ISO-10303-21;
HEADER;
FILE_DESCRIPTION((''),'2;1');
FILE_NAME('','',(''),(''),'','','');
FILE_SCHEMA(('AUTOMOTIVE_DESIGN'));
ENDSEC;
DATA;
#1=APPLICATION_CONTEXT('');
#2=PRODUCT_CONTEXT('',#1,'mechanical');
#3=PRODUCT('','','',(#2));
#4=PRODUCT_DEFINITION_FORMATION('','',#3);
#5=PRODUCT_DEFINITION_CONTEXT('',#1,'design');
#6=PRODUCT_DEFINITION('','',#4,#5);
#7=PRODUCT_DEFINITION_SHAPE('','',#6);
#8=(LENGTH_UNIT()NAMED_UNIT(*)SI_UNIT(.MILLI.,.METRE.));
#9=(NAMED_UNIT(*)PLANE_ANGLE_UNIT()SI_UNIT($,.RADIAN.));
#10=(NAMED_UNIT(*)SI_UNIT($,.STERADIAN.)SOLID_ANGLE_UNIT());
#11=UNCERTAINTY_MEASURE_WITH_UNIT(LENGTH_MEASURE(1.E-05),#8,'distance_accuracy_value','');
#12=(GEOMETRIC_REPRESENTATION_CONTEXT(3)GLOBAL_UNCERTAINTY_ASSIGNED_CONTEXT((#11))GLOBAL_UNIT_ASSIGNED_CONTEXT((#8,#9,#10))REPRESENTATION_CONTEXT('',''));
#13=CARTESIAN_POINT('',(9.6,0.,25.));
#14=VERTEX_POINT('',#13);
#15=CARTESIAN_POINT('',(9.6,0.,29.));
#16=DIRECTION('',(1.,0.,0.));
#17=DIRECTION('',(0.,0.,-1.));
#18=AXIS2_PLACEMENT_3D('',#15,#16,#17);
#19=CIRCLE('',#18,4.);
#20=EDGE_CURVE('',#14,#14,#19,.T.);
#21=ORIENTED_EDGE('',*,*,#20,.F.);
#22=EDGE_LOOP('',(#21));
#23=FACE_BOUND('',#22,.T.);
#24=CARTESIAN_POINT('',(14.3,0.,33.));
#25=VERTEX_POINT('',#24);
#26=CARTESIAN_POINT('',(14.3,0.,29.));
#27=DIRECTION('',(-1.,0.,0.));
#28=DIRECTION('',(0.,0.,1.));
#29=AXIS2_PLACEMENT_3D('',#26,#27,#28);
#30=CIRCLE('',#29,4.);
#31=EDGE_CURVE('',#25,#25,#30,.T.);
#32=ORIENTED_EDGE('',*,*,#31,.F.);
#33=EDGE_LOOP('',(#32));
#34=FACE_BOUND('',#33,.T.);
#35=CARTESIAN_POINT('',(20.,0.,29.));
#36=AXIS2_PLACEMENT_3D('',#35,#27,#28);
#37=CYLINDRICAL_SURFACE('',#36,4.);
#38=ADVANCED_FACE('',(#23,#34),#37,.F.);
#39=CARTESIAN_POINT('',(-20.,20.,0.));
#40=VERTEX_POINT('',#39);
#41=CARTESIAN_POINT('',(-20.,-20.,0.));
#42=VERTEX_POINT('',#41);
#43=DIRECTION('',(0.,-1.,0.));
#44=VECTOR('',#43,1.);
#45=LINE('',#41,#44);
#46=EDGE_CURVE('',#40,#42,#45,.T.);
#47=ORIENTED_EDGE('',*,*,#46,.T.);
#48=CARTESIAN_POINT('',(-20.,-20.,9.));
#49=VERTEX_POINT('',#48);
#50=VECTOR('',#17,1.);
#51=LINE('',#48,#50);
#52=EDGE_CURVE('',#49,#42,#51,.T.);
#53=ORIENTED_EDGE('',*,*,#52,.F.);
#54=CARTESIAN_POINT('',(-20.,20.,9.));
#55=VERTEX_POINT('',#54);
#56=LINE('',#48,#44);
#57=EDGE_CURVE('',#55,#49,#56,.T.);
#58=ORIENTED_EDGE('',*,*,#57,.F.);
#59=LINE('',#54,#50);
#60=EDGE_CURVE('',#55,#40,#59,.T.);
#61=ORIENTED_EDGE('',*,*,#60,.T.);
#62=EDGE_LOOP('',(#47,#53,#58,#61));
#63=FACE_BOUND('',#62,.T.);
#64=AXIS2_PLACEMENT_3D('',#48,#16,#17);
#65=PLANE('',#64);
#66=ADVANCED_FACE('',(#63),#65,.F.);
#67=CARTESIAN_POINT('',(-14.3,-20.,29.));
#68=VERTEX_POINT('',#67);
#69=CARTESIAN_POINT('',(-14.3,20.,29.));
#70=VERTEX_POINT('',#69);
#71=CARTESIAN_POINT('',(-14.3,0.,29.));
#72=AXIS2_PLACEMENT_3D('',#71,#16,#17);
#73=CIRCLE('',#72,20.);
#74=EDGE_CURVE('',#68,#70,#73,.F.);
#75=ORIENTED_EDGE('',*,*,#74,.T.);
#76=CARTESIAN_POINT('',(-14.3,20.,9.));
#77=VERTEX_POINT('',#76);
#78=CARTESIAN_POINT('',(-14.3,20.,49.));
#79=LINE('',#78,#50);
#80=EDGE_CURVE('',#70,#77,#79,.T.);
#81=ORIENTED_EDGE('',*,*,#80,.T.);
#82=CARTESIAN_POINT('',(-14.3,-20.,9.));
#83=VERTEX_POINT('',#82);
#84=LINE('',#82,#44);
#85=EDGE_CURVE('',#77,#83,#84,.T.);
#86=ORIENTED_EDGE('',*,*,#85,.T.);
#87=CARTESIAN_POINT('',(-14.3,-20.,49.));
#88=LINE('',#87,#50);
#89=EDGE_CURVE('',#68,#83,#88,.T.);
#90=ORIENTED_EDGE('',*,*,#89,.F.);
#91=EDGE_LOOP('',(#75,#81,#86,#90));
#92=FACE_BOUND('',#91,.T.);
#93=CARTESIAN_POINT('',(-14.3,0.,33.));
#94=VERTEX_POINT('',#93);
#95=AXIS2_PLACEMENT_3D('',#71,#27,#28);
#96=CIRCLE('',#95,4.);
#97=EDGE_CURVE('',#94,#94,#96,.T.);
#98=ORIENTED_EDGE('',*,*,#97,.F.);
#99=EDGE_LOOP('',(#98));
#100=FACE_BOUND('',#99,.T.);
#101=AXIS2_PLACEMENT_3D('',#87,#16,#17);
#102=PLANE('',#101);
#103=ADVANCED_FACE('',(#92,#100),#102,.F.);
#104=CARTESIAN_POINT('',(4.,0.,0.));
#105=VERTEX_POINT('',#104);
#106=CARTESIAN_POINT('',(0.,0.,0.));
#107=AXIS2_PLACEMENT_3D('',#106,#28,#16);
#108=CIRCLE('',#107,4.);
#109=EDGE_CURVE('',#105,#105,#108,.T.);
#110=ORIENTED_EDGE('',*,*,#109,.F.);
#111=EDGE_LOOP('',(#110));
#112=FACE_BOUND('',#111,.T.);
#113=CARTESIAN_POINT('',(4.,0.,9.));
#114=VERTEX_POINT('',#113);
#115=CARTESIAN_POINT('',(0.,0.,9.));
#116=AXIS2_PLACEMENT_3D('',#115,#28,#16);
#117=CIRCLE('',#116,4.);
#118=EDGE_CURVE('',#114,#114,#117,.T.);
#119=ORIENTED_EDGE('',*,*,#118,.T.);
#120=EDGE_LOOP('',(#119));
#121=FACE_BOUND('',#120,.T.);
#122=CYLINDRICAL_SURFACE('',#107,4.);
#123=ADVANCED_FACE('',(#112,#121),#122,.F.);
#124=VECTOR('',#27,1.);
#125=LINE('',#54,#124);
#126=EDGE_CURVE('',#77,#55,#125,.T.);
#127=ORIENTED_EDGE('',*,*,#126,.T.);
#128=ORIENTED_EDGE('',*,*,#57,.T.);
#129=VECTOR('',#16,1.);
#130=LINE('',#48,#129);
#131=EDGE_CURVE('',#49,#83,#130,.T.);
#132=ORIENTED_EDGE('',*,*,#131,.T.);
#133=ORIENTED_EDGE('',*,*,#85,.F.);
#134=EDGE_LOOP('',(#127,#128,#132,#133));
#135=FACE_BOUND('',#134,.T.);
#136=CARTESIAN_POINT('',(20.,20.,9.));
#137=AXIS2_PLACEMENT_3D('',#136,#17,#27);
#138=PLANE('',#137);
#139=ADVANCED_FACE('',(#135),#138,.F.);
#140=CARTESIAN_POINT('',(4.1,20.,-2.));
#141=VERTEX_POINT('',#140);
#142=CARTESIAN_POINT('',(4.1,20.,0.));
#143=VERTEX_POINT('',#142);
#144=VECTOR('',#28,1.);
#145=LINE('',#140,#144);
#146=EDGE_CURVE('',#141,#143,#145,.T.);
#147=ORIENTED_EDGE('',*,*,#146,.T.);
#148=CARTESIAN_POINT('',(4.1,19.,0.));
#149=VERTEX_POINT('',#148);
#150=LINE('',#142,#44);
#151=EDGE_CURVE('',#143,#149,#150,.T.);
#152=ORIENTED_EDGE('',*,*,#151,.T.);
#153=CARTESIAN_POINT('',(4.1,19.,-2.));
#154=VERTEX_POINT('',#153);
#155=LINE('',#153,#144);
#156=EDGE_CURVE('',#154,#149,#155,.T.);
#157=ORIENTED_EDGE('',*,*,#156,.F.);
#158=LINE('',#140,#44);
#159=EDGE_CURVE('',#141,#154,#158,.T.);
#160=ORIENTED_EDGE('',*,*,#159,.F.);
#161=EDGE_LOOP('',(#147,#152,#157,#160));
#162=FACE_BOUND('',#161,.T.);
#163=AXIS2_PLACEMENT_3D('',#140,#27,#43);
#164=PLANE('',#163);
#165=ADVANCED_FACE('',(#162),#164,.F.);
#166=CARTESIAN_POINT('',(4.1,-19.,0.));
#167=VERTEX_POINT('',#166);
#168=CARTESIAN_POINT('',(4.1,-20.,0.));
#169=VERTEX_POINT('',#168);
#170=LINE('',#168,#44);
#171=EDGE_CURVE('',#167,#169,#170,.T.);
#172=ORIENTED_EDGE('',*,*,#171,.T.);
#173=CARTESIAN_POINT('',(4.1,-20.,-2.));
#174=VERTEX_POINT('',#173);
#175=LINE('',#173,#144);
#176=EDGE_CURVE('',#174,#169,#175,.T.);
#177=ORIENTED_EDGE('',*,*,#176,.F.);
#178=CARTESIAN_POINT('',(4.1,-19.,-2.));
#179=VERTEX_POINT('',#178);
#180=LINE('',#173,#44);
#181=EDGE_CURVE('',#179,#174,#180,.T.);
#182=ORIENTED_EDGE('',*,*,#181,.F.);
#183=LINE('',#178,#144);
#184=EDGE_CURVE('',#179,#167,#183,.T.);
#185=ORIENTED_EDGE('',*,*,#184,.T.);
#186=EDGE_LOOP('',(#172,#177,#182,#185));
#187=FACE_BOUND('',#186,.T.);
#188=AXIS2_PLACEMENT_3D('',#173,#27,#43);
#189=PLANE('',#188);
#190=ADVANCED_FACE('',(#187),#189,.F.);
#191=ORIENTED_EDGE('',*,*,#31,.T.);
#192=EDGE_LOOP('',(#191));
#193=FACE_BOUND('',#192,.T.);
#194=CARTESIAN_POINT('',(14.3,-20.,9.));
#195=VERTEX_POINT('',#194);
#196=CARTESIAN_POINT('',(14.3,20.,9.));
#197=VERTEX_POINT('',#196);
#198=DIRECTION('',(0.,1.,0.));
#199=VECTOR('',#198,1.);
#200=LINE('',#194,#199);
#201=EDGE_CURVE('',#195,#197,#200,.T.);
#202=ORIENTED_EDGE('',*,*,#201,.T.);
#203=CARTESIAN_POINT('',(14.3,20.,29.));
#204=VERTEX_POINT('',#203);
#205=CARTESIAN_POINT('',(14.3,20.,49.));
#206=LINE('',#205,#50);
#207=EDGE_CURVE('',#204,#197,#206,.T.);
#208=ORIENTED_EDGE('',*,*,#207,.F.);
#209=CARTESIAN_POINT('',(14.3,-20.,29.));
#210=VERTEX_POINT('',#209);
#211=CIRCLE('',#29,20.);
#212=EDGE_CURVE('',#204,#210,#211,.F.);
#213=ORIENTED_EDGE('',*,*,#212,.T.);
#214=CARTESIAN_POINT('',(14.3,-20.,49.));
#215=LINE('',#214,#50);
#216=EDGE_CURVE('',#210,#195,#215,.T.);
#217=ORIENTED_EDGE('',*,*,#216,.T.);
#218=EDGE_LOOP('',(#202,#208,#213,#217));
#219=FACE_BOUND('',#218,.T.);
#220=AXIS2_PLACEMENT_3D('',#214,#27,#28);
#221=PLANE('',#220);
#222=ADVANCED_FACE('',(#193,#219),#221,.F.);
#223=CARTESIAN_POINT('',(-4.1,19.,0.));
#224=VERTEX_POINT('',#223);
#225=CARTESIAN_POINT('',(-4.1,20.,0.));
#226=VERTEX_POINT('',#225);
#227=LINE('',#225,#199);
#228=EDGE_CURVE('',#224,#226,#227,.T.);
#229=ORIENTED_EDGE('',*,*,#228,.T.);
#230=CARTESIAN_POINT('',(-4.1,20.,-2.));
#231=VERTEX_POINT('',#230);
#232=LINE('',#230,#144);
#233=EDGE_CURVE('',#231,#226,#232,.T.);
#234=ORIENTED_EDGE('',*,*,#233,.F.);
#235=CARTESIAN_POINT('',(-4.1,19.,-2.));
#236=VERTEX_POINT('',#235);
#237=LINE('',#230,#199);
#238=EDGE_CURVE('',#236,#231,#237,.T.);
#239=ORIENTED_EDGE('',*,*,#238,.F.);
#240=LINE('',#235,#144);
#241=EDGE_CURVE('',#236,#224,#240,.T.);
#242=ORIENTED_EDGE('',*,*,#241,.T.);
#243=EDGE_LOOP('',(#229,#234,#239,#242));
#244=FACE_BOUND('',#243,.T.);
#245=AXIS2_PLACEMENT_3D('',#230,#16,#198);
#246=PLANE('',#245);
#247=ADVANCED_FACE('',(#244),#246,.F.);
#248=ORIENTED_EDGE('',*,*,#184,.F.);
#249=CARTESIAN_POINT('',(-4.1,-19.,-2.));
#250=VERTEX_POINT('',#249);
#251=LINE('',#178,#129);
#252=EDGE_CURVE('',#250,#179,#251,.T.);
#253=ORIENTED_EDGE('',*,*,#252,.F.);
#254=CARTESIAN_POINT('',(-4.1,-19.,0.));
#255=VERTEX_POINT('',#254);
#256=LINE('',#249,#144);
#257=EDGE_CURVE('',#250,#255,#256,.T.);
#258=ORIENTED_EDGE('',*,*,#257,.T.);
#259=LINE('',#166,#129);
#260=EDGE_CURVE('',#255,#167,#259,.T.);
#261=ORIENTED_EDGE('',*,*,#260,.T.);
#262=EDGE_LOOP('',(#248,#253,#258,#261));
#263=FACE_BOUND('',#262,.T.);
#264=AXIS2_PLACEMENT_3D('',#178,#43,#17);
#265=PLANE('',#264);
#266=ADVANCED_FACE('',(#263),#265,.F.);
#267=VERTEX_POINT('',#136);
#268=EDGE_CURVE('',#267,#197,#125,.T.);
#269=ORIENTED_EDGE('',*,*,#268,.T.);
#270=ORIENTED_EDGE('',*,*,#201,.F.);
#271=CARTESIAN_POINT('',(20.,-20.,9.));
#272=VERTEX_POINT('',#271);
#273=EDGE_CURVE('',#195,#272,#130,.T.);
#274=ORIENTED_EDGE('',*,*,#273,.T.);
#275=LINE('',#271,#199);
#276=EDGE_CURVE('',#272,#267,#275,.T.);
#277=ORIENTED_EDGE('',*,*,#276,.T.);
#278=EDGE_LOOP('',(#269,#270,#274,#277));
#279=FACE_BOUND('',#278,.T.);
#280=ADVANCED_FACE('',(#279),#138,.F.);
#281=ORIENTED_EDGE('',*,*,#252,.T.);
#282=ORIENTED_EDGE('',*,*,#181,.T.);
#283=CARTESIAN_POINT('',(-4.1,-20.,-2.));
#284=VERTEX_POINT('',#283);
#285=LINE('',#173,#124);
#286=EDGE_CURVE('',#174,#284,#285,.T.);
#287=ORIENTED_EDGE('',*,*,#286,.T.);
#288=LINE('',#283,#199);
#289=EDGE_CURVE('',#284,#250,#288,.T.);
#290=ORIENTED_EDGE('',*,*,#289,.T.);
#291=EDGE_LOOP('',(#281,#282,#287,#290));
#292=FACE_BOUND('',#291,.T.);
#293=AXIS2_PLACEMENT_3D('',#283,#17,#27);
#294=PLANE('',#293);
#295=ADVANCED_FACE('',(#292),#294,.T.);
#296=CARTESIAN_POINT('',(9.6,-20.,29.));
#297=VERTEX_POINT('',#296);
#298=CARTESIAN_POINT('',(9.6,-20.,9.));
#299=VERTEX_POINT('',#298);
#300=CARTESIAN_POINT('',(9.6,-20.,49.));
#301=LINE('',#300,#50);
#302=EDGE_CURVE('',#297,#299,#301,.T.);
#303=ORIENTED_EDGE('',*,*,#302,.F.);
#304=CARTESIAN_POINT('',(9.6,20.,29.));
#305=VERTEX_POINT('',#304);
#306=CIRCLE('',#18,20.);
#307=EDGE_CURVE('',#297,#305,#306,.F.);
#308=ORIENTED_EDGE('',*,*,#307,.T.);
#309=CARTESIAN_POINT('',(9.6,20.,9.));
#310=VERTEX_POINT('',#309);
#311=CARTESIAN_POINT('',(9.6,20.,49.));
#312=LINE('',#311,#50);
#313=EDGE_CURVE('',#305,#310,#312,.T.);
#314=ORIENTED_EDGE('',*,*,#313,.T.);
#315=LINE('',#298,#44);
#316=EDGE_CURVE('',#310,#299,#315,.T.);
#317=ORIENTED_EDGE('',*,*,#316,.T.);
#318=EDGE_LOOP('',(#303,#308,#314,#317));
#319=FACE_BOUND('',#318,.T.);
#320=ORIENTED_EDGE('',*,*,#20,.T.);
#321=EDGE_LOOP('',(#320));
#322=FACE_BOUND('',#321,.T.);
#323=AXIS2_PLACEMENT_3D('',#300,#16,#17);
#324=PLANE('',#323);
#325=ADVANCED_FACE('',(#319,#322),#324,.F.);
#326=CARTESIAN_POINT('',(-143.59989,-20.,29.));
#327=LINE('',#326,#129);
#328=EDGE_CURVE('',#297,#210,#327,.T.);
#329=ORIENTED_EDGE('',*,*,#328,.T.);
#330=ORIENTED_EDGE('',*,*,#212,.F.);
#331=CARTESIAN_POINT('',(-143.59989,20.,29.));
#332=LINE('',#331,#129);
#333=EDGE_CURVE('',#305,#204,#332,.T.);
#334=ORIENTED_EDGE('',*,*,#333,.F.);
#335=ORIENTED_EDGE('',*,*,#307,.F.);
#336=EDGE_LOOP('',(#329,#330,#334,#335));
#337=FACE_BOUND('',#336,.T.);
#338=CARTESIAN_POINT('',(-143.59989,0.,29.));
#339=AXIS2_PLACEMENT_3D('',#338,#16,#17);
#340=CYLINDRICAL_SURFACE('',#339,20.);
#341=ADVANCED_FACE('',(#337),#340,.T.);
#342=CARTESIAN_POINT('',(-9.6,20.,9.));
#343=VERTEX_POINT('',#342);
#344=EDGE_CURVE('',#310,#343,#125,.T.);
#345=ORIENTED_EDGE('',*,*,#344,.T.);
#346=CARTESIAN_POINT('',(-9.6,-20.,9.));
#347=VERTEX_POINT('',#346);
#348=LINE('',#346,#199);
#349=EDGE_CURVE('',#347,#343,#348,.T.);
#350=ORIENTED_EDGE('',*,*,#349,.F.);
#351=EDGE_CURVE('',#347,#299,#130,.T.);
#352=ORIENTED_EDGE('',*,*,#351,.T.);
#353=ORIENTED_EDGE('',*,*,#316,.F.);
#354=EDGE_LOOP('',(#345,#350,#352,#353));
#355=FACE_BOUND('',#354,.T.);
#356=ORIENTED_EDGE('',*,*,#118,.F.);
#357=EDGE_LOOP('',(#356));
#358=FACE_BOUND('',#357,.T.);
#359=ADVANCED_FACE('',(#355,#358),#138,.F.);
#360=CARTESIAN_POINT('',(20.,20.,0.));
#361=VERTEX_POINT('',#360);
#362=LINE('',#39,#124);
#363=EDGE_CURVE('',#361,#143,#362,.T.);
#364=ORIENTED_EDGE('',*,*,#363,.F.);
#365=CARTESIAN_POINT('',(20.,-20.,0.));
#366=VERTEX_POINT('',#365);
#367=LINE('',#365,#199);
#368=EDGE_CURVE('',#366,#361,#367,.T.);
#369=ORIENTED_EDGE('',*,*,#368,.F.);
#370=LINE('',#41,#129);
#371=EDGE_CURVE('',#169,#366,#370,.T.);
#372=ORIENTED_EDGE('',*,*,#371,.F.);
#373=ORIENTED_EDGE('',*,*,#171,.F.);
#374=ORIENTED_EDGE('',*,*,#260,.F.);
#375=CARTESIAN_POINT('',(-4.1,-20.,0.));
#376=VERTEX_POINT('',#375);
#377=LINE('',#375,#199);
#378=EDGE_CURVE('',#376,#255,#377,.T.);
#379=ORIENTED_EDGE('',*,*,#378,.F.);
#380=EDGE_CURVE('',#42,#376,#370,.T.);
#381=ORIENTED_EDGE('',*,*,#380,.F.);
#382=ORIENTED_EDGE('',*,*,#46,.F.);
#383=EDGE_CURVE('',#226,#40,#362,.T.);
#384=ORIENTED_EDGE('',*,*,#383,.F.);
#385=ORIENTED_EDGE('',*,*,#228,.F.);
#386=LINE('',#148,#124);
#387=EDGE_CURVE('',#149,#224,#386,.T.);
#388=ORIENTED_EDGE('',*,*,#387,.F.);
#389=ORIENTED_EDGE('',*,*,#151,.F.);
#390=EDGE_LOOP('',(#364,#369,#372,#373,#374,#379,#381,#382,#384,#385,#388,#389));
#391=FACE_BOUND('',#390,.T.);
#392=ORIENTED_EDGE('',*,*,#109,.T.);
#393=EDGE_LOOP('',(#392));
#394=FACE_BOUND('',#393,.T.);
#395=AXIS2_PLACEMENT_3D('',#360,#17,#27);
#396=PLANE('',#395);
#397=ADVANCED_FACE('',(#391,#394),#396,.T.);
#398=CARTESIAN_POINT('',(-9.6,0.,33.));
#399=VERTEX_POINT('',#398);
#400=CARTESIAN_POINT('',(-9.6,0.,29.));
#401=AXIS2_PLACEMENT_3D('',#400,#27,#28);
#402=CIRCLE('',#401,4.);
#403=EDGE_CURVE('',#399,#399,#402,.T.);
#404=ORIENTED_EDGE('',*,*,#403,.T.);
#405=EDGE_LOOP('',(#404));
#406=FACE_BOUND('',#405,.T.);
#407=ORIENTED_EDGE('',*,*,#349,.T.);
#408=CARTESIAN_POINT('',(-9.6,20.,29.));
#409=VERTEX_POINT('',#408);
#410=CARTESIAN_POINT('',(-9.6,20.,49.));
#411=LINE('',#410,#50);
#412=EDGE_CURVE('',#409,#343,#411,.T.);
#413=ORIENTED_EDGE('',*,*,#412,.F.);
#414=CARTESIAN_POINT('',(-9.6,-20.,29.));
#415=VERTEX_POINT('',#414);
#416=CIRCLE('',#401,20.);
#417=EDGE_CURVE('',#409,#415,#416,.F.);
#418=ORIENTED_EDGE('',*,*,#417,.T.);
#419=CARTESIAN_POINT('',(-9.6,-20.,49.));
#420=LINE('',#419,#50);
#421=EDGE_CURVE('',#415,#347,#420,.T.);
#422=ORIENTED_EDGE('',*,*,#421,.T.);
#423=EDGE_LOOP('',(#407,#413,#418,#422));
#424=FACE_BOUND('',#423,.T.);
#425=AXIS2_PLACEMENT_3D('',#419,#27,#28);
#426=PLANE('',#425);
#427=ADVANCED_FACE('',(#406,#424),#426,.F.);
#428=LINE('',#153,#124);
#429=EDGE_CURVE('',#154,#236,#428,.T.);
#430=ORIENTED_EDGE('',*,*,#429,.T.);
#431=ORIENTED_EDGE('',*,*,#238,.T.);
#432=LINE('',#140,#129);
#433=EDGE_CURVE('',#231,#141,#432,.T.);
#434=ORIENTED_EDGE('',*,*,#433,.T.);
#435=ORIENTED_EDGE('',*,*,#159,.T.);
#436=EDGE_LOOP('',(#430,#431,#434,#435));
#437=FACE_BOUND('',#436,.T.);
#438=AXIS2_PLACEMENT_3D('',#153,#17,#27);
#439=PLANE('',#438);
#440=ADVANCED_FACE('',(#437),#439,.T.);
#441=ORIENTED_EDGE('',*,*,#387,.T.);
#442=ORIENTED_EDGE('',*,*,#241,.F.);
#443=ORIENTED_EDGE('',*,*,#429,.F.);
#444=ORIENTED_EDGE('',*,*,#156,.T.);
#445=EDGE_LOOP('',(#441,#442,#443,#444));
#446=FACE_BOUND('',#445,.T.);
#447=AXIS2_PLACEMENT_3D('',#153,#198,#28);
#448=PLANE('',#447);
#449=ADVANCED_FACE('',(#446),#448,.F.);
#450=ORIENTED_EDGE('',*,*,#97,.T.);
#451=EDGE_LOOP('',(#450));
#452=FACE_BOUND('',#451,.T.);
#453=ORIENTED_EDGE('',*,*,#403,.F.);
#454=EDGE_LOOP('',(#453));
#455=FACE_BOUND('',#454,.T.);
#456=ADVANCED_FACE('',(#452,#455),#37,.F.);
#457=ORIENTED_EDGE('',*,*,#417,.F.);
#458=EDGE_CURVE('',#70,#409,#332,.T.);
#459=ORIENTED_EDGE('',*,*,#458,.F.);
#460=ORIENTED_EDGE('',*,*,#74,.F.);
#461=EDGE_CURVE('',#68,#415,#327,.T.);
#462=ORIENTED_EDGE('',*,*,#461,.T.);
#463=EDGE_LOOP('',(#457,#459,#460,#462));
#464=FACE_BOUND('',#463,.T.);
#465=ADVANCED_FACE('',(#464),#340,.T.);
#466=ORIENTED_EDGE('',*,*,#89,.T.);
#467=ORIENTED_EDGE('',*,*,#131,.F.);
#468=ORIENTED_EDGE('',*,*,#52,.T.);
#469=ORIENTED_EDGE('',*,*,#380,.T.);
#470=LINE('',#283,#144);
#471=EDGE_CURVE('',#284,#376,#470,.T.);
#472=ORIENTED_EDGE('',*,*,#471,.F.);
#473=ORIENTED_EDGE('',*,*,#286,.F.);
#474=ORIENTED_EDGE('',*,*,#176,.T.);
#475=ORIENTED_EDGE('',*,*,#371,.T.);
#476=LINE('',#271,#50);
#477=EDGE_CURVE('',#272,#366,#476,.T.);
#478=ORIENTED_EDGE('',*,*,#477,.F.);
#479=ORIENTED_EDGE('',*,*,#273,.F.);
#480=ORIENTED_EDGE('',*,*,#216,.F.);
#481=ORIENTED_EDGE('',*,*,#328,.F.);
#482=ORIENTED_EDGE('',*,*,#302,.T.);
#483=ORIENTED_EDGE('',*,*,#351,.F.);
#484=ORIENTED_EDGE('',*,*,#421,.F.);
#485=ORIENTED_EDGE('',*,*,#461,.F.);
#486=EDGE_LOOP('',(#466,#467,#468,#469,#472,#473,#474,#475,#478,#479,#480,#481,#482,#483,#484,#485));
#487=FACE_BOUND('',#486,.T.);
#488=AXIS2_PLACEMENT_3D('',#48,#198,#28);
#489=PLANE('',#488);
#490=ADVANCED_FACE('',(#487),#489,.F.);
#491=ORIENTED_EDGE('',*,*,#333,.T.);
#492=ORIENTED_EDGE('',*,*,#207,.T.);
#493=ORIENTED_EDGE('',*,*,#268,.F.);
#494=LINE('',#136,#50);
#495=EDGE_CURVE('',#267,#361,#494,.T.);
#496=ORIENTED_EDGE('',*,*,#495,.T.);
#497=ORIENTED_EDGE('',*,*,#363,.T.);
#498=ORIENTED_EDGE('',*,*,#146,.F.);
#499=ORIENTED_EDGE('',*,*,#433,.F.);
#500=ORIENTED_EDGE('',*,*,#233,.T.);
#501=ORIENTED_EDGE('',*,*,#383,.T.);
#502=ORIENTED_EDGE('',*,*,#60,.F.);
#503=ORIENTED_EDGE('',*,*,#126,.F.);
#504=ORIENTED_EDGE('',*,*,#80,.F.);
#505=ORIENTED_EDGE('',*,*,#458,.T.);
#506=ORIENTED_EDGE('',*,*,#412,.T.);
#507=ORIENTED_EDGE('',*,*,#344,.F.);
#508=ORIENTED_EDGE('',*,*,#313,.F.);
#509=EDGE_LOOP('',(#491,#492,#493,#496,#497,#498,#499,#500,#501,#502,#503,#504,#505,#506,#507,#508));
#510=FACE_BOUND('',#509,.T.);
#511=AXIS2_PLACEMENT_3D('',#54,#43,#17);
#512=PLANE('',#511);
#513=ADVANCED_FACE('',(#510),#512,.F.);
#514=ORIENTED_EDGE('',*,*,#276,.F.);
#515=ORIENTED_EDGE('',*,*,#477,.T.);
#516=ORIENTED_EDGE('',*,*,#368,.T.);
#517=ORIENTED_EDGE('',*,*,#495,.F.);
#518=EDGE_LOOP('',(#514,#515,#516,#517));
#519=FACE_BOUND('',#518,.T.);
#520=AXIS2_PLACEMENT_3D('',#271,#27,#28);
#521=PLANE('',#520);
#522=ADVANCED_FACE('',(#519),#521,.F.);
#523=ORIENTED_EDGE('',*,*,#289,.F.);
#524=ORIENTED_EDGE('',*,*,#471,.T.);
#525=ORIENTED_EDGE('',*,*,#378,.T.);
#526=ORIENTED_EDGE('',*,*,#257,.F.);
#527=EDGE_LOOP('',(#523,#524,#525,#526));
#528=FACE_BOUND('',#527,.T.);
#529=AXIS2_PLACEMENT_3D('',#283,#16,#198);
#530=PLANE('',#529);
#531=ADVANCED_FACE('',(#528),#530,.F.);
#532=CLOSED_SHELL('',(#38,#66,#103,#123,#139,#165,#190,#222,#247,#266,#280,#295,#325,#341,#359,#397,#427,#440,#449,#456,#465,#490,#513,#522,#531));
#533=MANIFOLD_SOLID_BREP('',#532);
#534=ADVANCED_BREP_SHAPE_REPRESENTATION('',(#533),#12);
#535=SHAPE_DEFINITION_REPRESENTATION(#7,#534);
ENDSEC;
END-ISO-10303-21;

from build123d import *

# Parameters (mm, degrees)
SKETCH_1_W          = 40
SKETCH_1_H          = 40
EXTRUDE_1_DEPTH     = 9
SKETCH_2_W          = 4.7
SKETCH_2_H          = 40
EXTRUDE_2_DEPTH     = 40
CUT_EXTRUDE_START   = -28.6
CUT_EXTRUDE_2_DEPTH = 28.6
SKETCH_4_R          = 4
CUT_EXTRUDE_3_DEPTH = 64.067344958
SKETCH_6_R          = 4
CUT_EXTRUDE_5_DEPTH = 49.989794856
SKETCH_7_W          = 8.2
SKETCH_7_H          = 1
EXTRUDE_3_DEPTH     = 2


# Read off the part's stored shape, not the designer's step: 切除-拉伸2
with BuildPart() as part:
    # 草图1 → 凸台-拉伸1 (new body)
    with BuildSketch(Plane.XY):
        Rectangle(SKETCH_1_W, SKETCH_1_H)
    extrude(amount=EXTRUDE_1_DEPTH)

    # 草图2 → 凸台-拉伸2 (add)
    with BuildSketch(Plane.XY.offset(9)):
        with Locations((-11.95, 0)):
            Rectangle(SKETCH_2_W, SKETCH_2_H)
        with Locations((11.95, 0)):
            Rectangle(SKETCH_2_W, SKETCH_2_H)
    extrude(amount=EXTRUDE_2_DEPTH)

    # 切除-拉伸2 outline → 切除-拉伸2 (cut)
    with BuildSketch(Plane.ZY.offset(14.3).offset(CUT_EXTRUDE_START)):
        with BuildLine():
            Line((49, 20), (29, 20))
            ThreePointArc((29, 20), (43.142135559, 14.142135688), (49, 1.83e-07))
            Line((49, 1.83e-07), (49, 20))
        make_face()
        with BuildLine():
            Line((49, -20), (49, 1.83e-07))
            ThreePointArc((49, 1.83e-07), (43.142135688, -14.142135559), (29, -20))
            Line((29, -20), (49, -20))
        make_face()
    extrude(amount=CUT_EXTRUDE_2_DEPTH, mode=Mode.SUBTRACT)

    # 草图4 → 切除-拉伸3 (cut, through all)
    with BuildSketch(Plane.ZY.offset(14.3)):
        with Locations((29, 0)):
            Circle(SKETCH_4_R)
    extrude(amount=-CUT_EXTRUDE_3_DEPTH, mode=Mode.SUBTRACT)

    # 草图6 → 切除-拉伸5 (cut, through all)
    with BuildSketch(Plane.XY.offset(9)):
        Circle(SKETCH_6_R)
    extrude(amount=-CUT_EXTRUDE_5_DEPTH, mode=Mode.SUBTRACT)

    # 草图7 → 凸台-拉伸3 (add)
    with BuildSketch(Plane(origin=(0, 0, 0), x_dir=(-1, 0, 0), z_dir=(0, 0, -1))):
        with Locations((0, 19.5)):
            Rectangle(SKETCH_7_W, SKETCH_7_H)
        with Locations((0, -19.5)):
            Rectangle(SKETCH_7_W, SKETCH_7_H)
    extrude(amount=EXTRUDE_3_DEPTH)


solid = part.part
